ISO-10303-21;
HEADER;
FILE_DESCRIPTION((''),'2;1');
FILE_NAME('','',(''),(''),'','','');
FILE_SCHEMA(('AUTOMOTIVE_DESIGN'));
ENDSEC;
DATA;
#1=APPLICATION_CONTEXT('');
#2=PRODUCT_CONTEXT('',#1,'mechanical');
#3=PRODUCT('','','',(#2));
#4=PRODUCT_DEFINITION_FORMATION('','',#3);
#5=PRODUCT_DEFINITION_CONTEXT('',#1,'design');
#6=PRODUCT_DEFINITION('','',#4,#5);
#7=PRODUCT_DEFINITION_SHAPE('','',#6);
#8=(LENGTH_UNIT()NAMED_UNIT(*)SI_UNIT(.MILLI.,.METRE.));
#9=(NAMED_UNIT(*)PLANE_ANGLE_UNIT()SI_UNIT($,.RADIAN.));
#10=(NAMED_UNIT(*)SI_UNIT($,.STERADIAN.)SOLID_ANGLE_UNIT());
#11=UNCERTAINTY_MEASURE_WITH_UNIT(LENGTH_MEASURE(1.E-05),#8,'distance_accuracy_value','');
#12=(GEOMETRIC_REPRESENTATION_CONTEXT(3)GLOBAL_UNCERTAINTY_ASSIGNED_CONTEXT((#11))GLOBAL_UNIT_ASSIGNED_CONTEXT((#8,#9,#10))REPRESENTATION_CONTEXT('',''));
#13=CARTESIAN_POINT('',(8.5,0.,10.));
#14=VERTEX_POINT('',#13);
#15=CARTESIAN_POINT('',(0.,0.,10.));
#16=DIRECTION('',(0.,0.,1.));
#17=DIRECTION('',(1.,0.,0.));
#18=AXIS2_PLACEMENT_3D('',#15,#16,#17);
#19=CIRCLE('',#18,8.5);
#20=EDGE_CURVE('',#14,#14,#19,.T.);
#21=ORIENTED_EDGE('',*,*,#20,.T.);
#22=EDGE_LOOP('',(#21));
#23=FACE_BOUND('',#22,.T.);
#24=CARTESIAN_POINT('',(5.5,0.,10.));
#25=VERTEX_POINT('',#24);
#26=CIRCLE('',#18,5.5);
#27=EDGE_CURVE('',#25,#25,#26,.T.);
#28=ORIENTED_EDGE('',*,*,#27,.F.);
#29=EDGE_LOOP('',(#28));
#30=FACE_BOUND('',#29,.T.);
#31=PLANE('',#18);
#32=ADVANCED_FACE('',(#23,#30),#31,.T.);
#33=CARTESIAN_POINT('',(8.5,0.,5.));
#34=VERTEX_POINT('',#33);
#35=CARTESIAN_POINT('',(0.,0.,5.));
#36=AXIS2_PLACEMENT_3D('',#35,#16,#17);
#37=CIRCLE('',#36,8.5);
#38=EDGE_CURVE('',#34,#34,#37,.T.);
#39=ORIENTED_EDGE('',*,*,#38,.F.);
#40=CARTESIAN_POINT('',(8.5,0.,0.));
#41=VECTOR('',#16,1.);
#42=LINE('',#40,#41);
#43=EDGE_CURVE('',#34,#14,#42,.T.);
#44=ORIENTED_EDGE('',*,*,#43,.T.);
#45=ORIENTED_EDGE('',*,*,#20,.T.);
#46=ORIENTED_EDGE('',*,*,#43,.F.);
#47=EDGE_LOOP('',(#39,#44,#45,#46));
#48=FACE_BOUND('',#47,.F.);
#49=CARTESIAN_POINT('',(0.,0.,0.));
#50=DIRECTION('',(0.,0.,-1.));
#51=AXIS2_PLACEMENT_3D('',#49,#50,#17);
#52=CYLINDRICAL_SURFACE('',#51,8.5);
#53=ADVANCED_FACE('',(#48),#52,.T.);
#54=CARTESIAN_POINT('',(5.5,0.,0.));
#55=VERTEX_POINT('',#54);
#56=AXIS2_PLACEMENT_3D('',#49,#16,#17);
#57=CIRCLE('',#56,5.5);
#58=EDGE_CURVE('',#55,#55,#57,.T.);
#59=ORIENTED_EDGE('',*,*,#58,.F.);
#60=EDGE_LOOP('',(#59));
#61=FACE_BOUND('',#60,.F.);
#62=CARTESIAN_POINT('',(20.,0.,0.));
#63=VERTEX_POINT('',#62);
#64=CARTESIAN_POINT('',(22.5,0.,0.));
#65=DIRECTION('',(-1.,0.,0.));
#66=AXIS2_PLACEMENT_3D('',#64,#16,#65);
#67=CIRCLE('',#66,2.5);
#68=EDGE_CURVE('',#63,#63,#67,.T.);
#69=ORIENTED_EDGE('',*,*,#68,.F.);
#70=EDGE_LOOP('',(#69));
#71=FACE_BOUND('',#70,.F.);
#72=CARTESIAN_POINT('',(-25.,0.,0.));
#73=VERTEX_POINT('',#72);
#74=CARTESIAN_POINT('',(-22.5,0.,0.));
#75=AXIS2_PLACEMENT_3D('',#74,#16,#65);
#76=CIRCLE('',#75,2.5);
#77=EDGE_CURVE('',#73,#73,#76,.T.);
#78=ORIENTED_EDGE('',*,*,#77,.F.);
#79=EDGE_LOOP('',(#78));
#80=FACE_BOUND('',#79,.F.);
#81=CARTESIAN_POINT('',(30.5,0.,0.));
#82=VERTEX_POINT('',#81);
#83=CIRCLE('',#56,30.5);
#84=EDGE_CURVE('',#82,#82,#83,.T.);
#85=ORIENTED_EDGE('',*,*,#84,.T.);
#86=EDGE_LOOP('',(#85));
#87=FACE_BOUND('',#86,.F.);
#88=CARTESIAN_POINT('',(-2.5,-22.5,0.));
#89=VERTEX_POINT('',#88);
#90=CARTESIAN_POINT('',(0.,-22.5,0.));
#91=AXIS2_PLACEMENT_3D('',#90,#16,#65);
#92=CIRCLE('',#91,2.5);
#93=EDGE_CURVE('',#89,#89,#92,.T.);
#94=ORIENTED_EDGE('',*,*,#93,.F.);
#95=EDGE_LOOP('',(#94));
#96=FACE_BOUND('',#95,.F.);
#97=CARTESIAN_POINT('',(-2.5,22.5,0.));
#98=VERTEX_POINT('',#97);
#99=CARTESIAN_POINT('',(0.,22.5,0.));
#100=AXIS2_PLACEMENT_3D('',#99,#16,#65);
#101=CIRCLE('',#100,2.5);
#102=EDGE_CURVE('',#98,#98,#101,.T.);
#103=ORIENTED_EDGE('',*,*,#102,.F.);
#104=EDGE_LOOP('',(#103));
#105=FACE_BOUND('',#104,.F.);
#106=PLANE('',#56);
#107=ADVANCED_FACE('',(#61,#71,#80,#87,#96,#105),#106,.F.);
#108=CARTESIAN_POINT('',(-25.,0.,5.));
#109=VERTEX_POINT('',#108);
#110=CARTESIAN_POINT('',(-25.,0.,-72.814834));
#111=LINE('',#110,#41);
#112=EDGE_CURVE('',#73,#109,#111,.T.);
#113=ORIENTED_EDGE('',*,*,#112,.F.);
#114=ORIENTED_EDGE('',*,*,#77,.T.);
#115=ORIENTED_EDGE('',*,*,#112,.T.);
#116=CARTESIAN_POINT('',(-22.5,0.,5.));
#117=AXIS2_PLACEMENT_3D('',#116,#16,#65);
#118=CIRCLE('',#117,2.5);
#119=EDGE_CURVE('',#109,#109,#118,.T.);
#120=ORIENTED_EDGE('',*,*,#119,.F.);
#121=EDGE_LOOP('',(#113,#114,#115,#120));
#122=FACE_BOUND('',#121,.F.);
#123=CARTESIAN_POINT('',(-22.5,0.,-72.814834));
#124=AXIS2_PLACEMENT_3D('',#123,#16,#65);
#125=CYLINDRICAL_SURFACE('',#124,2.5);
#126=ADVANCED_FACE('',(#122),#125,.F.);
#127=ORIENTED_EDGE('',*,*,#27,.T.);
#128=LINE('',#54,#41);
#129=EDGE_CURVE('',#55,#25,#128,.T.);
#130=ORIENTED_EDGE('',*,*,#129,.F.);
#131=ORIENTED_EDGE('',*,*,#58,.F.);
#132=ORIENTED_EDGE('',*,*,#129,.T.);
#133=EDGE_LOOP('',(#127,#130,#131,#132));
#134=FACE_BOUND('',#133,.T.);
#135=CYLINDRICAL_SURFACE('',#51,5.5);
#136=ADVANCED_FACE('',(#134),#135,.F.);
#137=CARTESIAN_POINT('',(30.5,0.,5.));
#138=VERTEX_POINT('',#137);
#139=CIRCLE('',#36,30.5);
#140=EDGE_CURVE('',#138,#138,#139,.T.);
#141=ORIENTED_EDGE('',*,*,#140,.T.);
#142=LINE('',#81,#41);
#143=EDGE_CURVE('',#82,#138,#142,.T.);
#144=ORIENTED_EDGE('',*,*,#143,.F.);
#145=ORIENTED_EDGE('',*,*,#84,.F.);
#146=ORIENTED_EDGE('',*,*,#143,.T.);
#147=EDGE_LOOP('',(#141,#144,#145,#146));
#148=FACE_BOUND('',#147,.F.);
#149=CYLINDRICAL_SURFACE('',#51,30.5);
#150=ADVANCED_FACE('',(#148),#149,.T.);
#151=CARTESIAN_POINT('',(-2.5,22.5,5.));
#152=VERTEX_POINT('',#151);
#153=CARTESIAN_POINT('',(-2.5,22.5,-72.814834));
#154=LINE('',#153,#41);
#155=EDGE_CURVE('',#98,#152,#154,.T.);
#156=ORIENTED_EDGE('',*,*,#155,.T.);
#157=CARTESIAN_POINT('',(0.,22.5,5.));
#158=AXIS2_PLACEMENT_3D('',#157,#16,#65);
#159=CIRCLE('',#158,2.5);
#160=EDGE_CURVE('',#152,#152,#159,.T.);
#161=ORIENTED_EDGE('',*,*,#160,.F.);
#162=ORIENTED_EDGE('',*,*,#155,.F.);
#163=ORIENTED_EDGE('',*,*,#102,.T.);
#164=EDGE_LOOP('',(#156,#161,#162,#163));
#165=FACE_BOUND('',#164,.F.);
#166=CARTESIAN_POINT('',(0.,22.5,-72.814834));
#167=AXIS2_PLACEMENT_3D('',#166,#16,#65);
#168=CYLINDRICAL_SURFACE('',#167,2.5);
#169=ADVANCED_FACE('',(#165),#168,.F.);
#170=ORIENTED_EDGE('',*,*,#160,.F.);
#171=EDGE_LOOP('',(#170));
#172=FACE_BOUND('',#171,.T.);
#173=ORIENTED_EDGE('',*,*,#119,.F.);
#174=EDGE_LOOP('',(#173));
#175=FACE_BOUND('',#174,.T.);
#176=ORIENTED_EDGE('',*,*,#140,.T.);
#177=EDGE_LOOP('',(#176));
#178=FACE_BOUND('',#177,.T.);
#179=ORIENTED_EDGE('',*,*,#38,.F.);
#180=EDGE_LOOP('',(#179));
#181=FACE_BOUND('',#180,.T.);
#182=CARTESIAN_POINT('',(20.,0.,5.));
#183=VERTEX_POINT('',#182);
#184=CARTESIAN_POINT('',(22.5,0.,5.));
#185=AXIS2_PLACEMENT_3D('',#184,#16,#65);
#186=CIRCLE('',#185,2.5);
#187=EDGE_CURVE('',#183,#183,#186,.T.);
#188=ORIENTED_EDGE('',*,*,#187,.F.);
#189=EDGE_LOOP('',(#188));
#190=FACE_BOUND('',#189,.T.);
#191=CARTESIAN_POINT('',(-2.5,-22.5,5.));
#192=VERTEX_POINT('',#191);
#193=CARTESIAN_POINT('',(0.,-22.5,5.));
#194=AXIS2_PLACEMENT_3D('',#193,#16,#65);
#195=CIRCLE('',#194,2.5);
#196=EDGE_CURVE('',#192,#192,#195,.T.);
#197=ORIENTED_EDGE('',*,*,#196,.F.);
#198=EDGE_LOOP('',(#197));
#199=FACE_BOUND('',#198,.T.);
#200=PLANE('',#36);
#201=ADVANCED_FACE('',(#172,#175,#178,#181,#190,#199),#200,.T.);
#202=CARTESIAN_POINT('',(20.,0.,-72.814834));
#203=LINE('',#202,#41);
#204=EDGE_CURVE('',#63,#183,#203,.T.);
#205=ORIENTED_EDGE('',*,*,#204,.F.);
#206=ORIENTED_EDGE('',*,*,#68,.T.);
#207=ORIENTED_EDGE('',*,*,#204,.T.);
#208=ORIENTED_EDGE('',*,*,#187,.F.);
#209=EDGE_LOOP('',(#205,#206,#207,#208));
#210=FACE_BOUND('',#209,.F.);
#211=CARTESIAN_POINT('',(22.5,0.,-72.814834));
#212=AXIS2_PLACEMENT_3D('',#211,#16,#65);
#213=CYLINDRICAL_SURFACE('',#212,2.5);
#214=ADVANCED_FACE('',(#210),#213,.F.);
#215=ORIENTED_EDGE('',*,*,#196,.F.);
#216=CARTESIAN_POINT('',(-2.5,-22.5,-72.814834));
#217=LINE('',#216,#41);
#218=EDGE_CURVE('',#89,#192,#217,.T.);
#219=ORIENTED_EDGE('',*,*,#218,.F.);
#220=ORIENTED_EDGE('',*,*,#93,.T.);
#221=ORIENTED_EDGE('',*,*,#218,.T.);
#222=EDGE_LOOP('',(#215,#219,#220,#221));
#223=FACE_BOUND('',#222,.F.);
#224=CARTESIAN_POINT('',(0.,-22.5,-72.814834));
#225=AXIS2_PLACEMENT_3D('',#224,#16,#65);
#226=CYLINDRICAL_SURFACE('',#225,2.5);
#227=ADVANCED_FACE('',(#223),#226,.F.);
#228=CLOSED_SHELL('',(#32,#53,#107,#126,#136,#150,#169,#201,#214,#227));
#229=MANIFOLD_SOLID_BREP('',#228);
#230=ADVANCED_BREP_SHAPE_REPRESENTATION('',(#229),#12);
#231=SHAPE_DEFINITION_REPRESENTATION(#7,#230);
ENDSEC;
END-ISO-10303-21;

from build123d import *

# Parameters (mm, degrees)
F0_R     = 25.5
F0_R_2   = 8.5
F1_DEPTH = 5
F0_R_3   = 5.5
F2_DEPTH = 10
F3_D     = 5
F0_R_4   = 30.5
F4_DEPTH = 5


# Not quite as in the source:
# - a feature names something its author has since deleted; it is built from what else it names


with BuildPart() as f1:
    # F0 (on Top) → F1 (new body)
    with BuildSketch(Plane.XY):
        Circle(F0_R)
        Circle(F0_R_2, mode=Mode.SUBTRACT)
    extrude(amount=F1_DEPTH)

    # F0 (on Top) → F2 (join)
    with BuildSketch(Plane.XY):
        Circle(F0_R_2)
        Circle(F0_R_3, mode=Mode.SUBTRACT)
    extrude(amount=F2_DEPTH)

    # F3 (through all)
    with Locations(Plane(origin=(0, 0, 0), x_dir=(1, 0, 0), z_dir=(0, 0, -1))):
        with Locations((-22.5, 0), (0, -22.5), (22.5, 0), (0, 22.5)):
            Hole(F3_D / 2)

    # F0 (on Top) → F4 (join, through all)
    with BuildSketch(Plane.XY):
        Circle(F0_R_4)
        Circle(F0_R, mode=Mode.SUBTRACT)
    extrude(amount=F4_DEPTH)


solid = f1.part
